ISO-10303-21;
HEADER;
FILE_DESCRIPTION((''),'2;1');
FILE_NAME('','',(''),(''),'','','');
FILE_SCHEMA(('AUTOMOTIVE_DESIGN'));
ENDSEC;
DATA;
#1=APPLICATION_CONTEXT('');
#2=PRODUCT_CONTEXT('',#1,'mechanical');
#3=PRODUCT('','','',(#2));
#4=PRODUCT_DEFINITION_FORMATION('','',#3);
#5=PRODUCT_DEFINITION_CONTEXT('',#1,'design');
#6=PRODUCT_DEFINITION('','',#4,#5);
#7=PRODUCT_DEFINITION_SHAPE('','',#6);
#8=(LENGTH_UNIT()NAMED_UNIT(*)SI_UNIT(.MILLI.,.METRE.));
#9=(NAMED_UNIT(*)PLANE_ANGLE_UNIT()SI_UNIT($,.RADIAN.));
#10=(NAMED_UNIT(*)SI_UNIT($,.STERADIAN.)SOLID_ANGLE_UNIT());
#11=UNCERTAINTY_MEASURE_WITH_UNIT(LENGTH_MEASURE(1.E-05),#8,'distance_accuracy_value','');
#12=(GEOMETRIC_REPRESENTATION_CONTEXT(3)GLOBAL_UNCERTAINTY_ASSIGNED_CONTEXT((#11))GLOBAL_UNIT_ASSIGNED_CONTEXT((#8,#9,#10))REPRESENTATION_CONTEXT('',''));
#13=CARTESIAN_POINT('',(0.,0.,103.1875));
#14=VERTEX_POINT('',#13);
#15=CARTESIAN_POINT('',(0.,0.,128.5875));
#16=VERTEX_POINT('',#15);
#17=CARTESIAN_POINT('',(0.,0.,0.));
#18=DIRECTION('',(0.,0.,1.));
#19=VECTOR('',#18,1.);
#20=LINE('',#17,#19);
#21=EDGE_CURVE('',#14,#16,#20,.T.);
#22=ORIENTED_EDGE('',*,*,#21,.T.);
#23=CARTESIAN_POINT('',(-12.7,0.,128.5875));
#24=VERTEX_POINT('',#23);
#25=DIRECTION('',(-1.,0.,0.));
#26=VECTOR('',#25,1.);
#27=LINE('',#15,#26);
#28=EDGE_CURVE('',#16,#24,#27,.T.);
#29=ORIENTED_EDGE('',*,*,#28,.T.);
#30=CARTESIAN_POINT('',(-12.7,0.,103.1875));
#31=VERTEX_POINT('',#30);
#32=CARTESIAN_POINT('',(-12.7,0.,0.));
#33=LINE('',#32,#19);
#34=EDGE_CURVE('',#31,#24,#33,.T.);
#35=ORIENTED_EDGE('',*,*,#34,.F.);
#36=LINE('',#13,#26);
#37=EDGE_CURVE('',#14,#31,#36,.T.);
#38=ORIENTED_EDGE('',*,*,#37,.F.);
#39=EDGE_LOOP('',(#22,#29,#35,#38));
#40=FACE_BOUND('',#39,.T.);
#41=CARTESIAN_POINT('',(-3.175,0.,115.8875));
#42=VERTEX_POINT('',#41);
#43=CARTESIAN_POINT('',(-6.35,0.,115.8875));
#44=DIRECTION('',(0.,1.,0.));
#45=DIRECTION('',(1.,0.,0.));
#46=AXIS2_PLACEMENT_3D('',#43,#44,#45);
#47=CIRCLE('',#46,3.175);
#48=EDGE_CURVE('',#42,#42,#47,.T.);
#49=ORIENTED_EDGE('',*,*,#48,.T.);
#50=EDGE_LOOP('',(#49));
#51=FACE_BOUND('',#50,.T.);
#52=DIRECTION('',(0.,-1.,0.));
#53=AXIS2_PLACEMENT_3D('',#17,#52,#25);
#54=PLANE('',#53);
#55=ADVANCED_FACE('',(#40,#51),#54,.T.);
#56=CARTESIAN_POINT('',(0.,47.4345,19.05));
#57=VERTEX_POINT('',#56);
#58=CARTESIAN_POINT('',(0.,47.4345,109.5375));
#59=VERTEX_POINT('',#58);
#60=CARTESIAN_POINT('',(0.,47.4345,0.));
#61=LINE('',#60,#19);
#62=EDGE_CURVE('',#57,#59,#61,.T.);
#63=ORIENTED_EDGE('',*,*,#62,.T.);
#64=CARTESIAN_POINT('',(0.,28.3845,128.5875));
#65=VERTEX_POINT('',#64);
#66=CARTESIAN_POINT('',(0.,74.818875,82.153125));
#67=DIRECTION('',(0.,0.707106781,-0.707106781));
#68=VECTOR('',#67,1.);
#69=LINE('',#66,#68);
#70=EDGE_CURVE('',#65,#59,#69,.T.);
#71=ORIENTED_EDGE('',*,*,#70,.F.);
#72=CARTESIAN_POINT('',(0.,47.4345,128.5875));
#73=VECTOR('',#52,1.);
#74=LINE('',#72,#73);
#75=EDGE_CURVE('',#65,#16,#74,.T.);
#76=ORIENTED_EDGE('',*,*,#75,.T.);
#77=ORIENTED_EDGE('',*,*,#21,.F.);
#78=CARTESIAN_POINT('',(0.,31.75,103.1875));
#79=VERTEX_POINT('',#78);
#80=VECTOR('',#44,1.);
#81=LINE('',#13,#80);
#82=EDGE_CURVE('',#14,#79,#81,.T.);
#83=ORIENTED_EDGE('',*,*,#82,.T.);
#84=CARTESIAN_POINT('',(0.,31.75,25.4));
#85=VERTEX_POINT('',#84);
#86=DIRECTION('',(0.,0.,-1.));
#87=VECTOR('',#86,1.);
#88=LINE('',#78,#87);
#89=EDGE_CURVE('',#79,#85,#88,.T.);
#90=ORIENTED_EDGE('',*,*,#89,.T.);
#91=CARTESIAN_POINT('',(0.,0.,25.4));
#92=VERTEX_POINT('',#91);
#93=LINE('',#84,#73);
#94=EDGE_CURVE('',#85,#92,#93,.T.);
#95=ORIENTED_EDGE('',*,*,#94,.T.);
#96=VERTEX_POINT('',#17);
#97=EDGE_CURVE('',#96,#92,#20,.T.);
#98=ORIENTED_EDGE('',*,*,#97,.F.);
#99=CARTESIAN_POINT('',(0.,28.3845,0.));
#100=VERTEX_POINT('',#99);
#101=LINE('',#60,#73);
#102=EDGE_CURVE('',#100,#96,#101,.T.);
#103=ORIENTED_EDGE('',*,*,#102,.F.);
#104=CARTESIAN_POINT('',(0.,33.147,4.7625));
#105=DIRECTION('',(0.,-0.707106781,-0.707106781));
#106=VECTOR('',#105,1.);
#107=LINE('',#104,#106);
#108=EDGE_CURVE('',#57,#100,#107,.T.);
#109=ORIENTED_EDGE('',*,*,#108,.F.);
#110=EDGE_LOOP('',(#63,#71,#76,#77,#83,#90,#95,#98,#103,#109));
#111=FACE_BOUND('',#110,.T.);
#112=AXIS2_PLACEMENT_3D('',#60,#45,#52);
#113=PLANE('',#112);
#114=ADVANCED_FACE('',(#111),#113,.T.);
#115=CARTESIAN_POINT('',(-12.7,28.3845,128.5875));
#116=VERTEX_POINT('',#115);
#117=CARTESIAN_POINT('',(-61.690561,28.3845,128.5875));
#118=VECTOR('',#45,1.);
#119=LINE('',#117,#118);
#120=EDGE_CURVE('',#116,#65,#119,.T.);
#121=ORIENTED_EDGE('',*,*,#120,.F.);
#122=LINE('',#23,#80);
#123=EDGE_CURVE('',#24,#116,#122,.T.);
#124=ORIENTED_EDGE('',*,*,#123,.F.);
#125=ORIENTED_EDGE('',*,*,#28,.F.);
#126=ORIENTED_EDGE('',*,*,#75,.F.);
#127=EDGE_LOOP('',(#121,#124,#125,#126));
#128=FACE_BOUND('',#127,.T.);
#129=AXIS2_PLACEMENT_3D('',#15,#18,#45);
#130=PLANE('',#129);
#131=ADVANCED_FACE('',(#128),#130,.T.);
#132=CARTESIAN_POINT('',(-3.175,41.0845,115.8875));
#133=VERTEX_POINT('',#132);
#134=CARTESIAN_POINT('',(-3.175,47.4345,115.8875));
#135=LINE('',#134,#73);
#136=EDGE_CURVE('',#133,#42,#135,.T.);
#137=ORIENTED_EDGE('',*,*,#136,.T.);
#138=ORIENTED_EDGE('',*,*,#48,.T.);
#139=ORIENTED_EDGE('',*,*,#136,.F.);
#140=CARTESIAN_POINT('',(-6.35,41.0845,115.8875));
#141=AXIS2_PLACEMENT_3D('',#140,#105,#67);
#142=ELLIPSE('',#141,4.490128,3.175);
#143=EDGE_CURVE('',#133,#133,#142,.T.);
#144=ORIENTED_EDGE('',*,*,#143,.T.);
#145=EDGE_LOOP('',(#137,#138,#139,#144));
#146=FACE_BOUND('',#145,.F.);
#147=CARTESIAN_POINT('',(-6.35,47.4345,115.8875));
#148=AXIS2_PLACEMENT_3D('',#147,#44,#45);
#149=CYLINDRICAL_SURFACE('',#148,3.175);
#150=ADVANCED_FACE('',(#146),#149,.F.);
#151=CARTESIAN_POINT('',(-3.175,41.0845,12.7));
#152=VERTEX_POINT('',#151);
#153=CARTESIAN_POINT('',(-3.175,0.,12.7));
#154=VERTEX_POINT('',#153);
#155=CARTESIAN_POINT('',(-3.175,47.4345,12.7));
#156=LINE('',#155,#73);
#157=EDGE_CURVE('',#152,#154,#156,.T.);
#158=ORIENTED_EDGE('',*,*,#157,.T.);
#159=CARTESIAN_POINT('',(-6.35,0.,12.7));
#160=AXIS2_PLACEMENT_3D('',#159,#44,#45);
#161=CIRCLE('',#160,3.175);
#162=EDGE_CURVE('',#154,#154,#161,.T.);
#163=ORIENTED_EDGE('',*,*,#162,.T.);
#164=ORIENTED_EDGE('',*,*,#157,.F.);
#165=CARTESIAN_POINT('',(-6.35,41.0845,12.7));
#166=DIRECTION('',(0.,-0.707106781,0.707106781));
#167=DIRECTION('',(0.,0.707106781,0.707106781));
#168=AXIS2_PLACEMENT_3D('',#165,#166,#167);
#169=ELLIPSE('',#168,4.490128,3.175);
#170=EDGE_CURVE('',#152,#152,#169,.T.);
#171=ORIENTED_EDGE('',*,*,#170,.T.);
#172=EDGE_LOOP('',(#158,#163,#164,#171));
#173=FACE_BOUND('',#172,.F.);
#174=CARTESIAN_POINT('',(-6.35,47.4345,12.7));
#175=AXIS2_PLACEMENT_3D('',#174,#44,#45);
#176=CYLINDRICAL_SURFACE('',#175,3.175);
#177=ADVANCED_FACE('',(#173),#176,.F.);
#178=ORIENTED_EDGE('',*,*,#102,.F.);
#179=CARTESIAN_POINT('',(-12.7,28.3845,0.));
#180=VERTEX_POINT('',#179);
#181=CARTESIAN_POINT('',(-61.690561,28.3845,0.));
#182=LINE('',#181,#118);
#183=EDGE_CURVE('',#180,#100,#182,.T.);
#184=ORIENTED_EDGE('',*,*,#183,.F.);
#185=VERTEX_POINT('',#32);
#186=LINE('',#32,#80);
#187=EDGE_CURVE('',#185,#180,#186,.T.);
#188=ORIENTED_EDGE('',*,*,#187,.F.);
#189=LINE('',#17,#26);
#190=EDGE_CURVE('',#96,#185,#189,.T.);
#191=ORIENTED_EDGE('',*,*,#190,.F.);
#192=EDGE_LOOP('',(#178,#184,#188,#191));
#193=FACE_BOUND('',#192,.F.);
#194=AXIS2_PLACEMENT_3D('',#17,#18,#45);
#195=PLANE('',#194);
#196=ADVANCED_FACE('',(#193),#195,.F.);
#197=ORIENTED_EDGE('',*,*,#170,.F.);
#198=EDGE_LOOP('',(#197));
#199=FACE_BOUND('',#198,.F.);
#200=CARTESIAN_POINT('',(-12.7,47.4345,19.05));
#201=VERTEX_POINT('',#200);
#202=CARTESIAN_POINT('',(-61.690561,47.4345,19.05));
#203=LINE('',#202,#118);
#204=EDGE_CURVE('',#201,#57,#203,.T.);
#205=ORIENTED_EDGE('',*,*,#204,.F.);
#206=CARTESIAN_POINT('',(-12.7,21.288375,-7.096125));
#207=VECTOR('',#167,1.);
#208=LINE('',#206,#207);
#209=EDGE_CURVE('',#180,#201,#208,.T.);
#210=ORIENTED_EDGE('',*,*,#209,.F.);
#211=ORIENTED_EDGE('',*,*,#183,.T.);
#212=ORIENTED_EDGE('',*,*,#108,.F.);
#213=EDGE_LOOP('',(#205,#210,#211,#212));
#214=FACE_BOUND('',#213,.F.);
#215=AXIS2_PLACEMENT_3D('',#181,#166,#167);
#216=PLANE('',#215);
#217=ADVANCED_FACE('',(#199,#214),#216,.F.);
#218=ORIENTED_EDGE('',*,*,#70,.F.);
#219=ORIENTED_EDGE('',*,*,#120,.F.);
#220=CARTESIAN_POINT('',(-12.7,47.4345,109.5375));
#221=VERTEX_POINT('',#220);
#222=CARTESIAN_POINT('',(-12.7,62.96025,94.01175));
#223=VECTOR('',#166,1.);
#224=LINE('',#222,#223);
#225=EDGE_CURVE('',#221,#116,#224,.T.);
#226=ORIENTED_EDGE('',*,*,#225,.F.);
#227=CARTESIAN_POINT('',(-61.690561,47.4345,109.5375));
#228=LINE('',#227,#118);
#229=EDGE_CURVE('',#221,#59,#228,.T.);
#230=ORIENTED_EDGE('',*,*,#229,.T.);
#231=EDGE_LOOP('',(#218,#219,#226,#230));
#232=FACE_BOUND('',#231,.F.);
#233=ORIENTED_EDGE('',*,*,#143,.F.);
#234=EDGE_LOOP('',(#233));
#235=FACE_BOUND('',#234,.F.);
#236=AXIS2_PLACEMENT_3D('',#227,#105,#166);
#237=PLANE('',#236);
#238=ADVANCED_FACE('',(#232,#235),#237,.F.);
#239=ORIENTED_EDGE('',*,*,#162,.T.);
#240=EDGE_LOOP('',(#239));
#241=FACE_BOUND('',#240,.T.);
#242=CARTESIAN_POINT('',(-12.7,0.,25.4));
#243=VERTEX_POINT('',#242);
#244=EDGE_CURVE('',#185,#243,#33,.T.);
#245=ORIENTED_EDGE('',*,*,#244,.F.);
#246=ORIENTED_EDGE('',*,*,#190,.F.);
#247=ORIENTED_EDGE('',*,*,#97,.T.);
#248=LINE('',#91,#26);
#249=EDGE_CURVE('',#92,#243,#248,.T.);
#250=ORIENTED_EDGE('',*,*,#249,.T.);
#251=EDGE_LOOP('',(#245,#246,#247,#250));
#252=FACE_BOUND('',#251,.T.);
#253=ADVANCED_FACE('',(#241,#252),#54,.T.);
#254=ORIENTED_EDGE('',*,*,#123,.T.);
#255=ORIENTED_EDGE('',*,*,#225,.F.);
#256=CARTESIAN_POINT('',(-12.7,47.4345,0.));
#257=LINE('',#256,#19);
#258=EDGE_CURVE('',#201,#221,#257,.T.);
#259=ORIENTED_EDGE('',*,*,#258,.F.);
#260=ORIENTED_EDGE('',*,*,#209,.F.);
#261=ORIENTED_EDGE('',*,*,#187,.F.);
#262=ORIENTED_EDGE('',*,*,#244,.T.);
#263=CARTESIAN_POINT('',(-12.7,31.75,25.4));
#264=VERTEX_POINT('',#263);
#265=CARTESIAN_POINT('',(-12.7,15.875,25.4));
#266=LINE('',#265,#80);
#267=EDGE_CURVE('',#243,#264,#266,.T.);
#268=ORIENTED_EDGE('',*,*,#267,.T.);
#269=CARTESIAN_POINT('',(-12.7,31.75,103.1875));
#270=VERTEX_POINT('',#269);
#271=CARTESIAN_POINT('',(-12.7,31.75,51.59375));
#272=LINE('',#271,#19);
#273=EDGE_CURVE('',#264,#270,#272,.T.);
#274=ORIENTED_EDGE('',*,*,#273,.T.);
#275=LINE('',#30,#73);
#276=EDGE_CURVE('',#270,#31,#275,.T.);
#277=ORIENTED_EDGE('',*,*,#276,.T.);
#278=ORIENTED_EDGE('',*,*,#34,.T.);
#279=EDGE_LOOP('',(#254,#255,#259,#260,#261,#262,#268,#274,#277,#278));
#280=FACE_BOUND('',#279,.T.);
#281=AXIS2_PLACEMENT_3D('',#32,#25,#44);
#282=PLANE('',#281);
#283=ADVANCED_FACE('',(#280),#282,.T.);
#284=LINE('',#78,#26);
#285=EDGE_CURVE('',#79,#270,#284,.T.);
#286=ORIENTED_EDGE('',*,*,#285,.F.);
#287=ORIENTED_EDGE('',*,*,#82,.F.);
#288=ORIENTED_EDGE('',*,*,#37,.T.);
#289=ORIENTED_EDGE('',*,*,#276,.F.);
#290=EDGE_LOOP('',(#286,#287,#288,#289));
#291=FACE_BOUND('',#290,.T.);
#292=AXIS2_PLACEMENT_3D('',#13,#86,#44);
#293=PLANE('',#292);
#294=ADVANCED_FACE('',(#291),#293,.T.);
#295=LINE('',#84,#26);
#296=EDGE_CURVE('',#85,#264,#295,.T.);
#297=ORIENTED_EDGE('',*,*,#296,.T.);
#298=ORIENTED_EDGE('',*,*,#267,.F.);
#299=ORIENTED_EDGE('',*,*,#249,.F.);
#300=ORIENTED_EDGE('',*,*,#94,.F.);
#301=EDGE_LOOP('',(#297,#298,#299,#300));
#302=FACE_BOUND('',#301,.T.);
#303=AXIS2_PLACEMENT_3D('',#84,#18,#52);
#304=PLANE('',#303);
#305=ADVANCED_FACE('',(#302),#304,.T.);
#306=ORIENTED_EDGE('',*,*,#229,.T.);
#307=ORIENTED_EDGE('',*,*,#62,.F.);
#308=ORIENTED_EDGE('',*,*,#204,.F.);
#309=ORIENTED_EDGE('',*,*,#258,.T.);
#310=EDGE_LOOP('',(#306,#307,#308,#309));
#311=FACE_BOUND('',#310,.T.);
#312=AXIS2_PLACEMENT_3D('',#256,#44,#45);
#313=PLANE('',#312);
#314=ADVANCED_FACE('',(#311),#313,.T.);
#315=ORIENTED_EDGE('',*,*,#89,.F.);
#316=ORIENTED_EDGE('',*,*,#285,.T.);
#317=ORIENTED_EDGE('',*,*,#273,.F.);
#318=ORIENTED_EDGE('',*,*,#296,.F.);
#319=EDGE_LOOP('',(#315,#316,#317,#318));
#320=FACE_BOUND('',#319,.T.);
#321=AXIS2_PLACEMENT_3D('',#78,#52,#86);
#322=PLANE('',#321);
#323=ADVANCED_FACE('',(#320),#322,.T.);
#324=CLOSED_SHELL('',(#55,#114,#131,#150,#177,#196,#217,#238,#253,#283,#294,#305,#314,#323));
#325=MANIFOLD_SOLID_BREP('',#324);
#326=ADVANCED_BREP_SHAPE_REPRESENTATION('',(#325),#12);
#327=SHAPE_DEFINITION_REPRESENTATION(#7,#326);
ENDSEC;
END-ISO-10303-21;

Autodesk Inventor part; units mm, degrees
ref_plane "YZ Plane" through (0, 0, 0) normal (1, 0, 0) x (0, 1, 0)
ref_plane "XZ Plane" through (0, 0, 0) normal (0, 1, 0) x (-1, 0, 0)
ref_plane "XY Plane" through (0, 0, 0) normal (0, 0, 1) x (1, 0, 0)
sketch "Sketch1" plane through (0, 0, 0) normal (0, 0, 1) x (1, 0, 0)
  line L0 (0, 0) -> (-12.7, 0)
  line L1 (-12.7, 0) -> (-12.7, 47.4345)
  line L2 (-12.7, 47.4345) -> (0, 47.4345)
  line L3 (0, 47.4345) -> (0, 0)
  dimension "d0" = 12.7
  dimension "d1" = 47.4345
extrude "Extrusion1" add sketch "Sketch1" along normal blind 128.5875
sketch "Sketch2" plane through (0, 0, 0) normal (1, 0, 0) x (0, 0, -1)
  line L0 (-25.4, 0) -> (-103.1875, 0)
  line L1 (-103.1875, 0) -> (-103.1875, 31.75)
  line L2 (-103.1875, 31.75) -> (-25.4, 31.75)
  line L3 (-25.4, 31.75) -> (-25.4, 0)
  line L4 (0, 47.4345) -> (0, 0) projected
  line L5 (-128.5875, 0) -> (-128.5875, 47.4345) projected
  line L6 (0, 0) -> (-128.5875, 0) projected
  dimension "d4" = 25.4
  dimension "d5" = 25.4
  dimension "d6" = 77.7875
  dimension "d7" = 31.75
  dimension "d8" = 0
extrude "Extrusion2" cut sketch "Sketch2" against normal blind 77.7875
sketch "Sketch3" plane through (-12.7, 47.4345, 0) normal (0, 1, 0) x (1, 0, 0)
  circle A0 centre (6.35, -115.8875) radius 3.175
  circle A1 centre (6.35, -12.7) radius 3.175
  line L0 (0, 0) -> (0, -128.5875) projected
  line L1 (12.7, -128.5875) -> (0, -128.5875) projected
  line L2 (0, 0) -> (12.7, 0) projected
  dimension "d11" = 6.35
  dimension "d12" = 6.35
  dimension "d13" = 6.35
  dimension "d14" = 6.35
  dimension "d15" = 12.7
  dimension "d16" = 12.7
extrude "Extrusion3" cut sketch "Sketch3" against normal blind 77.7875
chamfer "Chamfer1" distance 19.05 angle 45 2 edges at (-6.35, 47.4345, 0) (-6.35, 47.4345, 128.5875)
properties part number "Intake Robustifier"
